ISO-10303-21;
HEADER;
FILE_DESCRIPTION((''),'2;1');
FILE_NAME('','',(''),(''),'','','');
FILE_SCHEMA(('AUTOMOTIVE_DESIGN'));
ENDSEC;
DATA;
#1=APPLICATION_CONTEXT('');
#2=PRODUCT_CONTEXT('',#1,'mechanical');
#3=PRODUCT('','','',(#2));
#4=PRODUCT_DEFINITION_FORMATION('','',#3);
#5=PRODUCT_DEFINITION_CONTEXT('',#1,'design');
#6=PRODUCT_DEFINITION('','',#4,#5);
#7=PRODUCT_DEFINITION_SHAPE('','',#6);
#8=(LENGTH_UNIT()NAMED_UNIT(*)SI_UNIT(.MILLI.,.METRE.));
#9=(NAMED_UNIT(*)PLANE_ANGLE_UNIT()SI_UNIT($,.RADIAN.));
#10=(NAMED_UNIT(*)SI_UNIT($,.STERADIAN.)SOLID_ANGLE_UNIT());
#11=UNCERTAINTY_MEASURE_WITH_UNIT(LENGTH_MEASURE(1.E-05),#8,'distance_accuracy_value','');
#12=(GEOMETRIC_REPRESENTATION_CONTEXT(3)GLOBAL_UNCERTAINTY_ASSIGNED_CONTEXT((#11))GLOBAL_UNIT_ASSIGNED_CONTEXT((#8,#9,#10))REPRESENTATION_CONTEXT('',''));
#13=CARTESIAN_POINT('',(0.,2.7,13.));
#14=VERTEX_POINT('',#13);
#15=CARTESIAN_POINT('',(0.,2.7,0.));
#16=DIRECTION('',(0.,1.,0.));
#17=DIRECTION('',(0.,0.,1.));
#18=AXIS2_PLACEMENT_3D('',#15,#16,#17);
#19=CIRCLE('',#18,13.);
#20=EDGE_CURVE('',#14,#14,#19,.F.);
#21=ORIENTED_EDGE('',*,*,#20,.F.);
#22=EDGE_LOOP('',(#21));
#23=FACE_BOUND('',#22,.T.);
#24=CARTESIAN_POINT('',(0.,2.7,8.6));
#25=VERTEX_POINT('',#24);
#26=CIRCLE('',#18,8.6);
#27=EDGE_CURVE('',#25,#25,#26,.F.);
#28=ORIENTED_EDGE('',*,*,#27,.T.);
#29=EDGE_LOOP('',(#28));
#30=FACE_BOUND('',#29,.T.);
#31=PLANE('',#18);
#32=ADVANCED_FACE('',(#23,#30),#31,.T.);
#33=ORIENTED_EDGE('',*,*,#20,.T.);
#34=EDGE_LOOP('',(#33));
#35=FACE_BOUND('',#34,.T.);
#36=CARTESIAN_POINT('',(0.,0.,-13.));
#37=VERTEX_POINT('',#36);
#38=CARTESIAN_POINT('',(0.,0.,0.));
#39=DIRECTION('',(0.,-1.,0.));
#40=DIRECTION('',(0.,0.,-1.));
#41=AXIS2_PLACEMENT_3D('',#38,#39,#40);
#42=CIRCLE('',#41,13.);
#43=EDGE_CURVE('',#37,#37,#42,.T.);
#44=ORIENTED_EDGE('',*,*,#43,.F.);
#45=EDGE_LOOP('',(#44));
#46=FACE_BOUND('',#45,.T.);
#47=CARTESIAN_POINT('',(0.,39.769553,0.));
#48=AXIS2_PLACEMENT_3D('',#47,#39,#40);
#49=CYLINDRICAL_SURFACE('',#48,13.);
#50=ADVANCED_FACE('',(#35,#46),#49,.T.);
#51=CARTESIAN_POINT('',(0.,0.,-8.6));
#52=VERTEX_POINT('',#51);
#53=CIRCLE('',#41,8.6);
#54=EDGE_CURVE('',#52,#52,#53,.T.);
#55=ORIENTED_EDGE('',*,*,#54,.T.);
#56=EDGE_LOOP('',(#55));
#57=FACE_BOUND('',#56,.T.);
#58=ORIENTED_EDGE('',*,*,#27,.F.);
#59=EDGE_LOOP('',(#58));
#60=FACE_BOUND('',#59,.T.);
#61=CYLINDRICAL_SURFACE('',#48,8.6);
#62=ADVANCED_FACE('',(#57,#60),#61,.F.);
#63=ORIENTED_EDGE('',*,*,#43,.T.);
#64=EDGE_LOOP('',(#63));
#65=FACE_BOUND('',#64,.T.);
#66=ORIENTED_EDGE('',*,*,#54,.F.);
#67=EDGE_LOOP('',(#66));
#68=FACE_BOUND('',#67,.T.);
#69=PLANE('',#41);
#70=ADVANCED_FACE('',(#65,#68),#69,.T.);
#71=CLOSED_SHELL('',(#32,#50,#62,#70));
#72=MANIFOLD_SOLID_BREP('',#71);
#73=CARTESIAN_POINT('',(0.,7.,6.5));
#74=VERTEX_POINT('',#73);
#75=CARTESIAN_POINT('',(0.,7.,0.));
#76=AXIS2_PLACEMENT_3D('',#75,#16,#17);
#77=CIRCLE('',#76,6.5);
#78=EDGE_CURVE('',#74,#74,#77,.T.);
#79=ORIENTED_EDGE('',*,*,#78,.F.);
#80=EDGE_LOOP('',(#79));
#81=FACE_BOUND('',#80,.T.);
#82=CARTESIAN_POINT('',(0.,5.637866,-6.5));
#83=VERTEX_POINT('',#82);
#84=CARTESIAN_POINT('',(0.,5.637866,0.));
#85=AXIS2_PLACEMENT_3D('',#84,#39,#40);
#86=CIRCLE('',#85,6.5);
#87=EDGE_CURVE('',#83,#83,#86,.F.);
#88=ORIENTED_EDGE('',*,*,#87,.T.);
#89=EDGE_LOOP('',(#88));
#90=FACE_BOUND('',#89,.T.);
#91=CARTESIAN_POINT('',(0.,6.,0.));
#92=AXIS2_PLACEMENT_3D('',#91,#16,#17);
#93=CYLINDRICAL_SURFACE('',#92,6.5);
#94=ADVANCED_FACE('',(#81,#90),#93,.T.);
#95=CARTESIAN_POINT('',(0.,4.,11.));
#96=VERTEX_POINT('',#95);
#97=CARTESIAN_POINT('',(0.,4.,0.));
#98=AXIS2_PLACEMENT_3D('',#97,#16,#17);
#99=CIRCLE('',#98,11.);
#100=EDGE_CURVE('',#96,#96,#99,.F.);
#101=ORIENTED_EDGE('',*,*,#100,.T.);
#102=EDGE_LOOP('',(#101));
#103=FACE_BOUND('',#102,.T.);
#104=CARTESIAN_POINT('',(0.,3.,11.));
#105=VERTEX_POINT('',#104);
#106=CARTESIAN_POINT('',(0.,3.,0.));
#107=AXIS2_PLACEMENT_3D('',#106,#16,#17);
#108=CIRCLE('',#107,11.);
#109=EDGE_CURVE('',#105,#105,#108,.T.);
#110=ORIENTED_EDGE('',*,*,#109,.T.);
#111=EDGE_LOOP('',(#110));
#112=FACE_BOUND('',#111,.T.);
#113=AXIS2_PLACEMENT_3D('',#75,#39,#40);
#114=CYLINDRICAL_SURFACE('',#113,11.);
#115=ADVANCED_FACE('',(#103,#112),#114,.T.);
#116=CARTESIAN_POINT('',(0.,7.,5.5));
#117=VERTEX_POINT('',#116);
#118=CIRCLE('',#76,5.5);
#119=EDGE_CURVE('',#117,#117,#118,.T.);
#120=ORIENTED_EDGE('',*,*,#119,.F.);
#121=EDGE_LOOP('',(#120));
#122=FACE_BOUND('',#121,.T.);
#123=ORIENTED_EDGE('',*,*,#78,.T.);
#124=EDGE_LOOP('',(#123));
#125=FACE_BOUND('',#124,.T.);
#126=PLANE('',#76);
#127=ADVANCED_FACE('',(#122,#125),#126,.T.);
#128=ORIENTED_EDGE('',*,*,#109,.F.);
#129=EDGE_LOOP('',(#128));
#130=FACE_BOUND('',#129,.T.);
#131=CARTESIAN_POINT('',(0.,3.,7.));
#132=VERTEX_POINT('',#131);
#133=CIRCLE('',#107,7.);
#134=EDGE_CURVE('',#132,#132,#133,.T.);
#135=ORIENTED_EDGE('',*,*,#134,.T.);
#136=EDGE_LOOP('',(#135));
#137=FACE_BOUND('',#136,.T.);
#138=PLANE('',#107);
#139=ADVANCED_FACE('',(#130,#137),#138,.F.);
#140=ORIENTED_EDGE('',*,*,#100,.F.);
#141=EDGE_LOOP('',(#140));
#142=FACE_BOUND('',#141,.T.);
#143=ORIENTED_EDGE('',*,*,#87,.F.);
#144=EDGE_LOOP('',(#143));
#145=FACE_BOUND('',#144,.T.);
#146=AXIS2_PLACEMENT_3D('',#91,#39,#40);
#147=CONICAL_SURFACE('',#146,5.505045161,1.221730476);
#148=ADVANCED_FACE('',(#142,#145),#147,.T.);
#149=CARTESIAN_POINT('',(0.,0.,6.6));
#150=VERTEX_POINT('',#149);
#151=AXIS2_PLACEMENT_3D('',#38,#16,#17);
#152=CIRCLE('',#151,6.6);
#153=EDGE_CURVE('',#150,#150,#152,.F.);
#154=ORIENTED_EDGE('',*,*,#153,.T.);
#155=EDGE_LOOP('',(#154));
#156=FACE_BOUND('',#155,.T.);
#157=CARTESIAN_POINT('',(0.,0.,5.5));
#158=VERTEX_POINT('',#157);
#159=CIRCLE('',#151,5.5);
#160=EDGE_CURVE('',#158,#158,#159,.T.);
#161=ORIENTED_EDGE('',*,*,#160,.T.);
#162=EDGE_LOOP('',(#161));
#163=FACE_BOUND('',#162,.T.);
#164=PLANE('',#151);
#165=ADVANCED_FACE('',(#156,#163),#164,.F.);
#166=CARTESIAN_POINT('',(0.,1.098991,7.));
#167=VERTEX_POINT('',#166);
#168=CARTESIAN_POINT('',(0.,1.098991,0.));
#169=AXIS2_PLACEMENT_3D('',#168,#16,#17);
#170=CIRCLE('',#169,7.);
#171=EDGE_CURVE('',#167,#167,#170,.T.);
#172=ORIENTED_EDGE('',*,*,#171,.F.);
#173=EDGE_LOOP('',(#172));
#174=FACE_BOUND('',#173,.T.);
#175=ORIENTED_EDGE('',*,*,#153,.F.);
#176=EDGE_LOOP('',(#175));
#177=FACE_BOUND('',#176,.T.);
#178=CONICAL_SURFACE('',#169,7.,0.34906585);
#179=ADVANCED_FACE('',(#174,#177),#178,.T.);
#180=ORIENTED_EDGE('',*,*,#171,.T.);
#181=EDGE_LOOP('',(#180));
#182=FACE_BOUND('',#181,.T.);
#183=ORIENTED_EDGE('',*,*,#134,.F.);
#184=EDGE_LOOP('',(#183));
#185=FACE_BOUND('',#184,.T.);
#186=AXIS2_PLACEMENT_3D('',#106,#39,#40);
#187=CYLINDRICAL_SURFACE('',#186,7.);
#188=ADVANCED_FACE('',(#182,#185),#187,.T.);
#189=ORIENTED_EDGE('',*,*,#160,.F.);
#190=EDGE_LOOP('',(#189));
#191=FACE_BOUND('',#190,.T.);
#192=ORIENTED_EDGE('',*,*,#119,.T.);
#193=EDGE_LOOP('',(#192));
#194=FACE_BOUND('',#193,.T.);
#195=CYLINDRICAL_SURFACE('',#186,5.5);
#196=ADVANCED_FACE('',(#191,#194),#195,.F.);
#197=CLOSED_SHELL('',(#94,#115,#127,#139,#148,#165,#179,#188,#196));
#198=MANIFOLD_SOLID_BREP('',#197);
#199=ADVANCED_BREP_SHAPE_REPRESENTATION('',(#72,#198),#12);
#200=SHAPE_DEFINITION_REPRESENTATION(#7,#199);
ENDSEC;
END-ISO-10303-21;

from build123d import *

# Parameters (mm, degrees)
SKETCH1_R           = 7
SKETCH1_R_2         = 5.5
BOSS_EXTRUDE1_DEPTH = 3
CHAMFER1_SIZE       = 0.4
CHAMFER1_SIZE2      = 1.098990968
SKETCH2_R           = 11
SKETCH2_R_2         = 5.5
BOSS_EXTRUDE2_DEPTH = 4
SKETCH3_OUTSIDE_W   = 30.378
SKETCH3_OUTSIDE_H   = 30.378
SKETCH3_OUTSIDE_R   = 6.5
CUT_EXTRUDE1_DEPTH  = 1
CHAMFER2_SIZE       = 2
CHAMFER2_SIZE_2     = 5.494954839
SKETCH5_R           = 13
SKETCH5_R_2         = 8.6
BOSS_EXTRUDE3_DEPTH = 2.7


with BuildPart() as part:
    # Sketch1 → Boss-Extrude1 (new body)
    with BuildSketch(Plane(origin=(0, 0, 0), x_dir=(1, 0, 0), z_dir=(0, 1, 0))):
        with Locations(Location((0, 0, 0), (0, 0, 270))):
            Circle(SKETCH1_R)
        with Locations(Location((0, 0, 0), (0, 0, 270))):
            Circle(SKETCH1_R_2, mode=Mode.SUBTRACT)
    extrude(amount=BOSS_EXTRUDE1_DEPTH)

    # Chamfer1
    chamfer1_edges = [part.edges().sort_by_distance(p)[0] for p in [
        (0, 0, -7),
    ]]
    chamfer1_side = [part.faces().sort_by_distance(p)[0] for p in [
        (0, 0, -6.802010101),
    ]]
    chamfer(chamfer1_edges, length=CHAMFER1_SIZE, length2=CHAMFER1_SIZE2, reference=chamfer1_side[0])

    # Sketch2 → Boss-Extrude2 (add)
    with BuildSketch(Plane(origin=(0, 3, 0), x_dir=(1, 0, 0), z_dir=(0, 1, 0))):
        with Locations(Location((0, 0, 0), (0, 0, 270))):
            Circle(SKETCH2_R)
        with Locations(Location((0, 0, 0), (0, 0, 270))):
            Circle(SKETCH2_R_2, mode=Mode.SUBTRACT)
    extrude(amount=BOSS_EXTRUDE2_DEPTH)

    # Sketch3 outside → Cut-Extrude1 (cut)
    with BuildSketch(Plane(origin=(0, 7, 0), x_dir=(1, 0, 0), z_dir=(0, 1, 0))):
        Rectangle(SKETCH3_OUTSIDE_W, SKETCH3_OUTSIDE_H)
        with Locations(Location((0, 0, 0), (0, 0, 270))):
            Circle(SKETCH3_OUTSIDE_R, mode=Mode.SUBTRACT)
    extrude(amount=-CUT_EXTRUDE1_DEPTH, mode=Mode.SUBTRACT)

    # Chamfer2
    # the kernel refuses this chamfer: 5.494954839, 2 mm, written as the material it takes off along each edge
    with BuildSketch(Plane(origin=(0, 6, 0), x_dir=(0, 0, 1), z_dir=(1, 0, 0))) as chamfer2_piece_1_section:
        Polygon((11, CHAMFER2_SIZE), (11 - CHAMFER2_SIZE_2, 0), (11, 0), align=None)
    chamfer2_piece_1 = revolve(axis=Axis((0, 6, 0), (0, -1, 0)), mode=Mode.PRIVATE)
    chamfer2_piece_1 = chamfer2_piece_1 - Plane(origin=(0, 4.848037637, 0), x_dir=(0, 0, 1), z_dir=(0, 1, 0)) * Cylinder(6.5, 44, mode=Mode.PRIVATE)
    add(chamfer2_piece_1, mode=Mode.SUBTRACT)


with BuildPart() as body_2:
    # Sketch5 → Boss-Extrude3 (new body)
    with BuildSketch(Plane.XZ):
        with Locations(Location((0, 0, 0), (0, 0, 270))):
            Circle(SKETCH5_R)
        with Locations(Location((0, 0, 0), (0, 0, 270))):
            Circle(SKETCH5_R_2, mode=Mode.SUBTRACT)
    extrude(amount=-BOSS_EXTRUDE3_DEPTH)


solid = Compound([part.part, body_2.part])
